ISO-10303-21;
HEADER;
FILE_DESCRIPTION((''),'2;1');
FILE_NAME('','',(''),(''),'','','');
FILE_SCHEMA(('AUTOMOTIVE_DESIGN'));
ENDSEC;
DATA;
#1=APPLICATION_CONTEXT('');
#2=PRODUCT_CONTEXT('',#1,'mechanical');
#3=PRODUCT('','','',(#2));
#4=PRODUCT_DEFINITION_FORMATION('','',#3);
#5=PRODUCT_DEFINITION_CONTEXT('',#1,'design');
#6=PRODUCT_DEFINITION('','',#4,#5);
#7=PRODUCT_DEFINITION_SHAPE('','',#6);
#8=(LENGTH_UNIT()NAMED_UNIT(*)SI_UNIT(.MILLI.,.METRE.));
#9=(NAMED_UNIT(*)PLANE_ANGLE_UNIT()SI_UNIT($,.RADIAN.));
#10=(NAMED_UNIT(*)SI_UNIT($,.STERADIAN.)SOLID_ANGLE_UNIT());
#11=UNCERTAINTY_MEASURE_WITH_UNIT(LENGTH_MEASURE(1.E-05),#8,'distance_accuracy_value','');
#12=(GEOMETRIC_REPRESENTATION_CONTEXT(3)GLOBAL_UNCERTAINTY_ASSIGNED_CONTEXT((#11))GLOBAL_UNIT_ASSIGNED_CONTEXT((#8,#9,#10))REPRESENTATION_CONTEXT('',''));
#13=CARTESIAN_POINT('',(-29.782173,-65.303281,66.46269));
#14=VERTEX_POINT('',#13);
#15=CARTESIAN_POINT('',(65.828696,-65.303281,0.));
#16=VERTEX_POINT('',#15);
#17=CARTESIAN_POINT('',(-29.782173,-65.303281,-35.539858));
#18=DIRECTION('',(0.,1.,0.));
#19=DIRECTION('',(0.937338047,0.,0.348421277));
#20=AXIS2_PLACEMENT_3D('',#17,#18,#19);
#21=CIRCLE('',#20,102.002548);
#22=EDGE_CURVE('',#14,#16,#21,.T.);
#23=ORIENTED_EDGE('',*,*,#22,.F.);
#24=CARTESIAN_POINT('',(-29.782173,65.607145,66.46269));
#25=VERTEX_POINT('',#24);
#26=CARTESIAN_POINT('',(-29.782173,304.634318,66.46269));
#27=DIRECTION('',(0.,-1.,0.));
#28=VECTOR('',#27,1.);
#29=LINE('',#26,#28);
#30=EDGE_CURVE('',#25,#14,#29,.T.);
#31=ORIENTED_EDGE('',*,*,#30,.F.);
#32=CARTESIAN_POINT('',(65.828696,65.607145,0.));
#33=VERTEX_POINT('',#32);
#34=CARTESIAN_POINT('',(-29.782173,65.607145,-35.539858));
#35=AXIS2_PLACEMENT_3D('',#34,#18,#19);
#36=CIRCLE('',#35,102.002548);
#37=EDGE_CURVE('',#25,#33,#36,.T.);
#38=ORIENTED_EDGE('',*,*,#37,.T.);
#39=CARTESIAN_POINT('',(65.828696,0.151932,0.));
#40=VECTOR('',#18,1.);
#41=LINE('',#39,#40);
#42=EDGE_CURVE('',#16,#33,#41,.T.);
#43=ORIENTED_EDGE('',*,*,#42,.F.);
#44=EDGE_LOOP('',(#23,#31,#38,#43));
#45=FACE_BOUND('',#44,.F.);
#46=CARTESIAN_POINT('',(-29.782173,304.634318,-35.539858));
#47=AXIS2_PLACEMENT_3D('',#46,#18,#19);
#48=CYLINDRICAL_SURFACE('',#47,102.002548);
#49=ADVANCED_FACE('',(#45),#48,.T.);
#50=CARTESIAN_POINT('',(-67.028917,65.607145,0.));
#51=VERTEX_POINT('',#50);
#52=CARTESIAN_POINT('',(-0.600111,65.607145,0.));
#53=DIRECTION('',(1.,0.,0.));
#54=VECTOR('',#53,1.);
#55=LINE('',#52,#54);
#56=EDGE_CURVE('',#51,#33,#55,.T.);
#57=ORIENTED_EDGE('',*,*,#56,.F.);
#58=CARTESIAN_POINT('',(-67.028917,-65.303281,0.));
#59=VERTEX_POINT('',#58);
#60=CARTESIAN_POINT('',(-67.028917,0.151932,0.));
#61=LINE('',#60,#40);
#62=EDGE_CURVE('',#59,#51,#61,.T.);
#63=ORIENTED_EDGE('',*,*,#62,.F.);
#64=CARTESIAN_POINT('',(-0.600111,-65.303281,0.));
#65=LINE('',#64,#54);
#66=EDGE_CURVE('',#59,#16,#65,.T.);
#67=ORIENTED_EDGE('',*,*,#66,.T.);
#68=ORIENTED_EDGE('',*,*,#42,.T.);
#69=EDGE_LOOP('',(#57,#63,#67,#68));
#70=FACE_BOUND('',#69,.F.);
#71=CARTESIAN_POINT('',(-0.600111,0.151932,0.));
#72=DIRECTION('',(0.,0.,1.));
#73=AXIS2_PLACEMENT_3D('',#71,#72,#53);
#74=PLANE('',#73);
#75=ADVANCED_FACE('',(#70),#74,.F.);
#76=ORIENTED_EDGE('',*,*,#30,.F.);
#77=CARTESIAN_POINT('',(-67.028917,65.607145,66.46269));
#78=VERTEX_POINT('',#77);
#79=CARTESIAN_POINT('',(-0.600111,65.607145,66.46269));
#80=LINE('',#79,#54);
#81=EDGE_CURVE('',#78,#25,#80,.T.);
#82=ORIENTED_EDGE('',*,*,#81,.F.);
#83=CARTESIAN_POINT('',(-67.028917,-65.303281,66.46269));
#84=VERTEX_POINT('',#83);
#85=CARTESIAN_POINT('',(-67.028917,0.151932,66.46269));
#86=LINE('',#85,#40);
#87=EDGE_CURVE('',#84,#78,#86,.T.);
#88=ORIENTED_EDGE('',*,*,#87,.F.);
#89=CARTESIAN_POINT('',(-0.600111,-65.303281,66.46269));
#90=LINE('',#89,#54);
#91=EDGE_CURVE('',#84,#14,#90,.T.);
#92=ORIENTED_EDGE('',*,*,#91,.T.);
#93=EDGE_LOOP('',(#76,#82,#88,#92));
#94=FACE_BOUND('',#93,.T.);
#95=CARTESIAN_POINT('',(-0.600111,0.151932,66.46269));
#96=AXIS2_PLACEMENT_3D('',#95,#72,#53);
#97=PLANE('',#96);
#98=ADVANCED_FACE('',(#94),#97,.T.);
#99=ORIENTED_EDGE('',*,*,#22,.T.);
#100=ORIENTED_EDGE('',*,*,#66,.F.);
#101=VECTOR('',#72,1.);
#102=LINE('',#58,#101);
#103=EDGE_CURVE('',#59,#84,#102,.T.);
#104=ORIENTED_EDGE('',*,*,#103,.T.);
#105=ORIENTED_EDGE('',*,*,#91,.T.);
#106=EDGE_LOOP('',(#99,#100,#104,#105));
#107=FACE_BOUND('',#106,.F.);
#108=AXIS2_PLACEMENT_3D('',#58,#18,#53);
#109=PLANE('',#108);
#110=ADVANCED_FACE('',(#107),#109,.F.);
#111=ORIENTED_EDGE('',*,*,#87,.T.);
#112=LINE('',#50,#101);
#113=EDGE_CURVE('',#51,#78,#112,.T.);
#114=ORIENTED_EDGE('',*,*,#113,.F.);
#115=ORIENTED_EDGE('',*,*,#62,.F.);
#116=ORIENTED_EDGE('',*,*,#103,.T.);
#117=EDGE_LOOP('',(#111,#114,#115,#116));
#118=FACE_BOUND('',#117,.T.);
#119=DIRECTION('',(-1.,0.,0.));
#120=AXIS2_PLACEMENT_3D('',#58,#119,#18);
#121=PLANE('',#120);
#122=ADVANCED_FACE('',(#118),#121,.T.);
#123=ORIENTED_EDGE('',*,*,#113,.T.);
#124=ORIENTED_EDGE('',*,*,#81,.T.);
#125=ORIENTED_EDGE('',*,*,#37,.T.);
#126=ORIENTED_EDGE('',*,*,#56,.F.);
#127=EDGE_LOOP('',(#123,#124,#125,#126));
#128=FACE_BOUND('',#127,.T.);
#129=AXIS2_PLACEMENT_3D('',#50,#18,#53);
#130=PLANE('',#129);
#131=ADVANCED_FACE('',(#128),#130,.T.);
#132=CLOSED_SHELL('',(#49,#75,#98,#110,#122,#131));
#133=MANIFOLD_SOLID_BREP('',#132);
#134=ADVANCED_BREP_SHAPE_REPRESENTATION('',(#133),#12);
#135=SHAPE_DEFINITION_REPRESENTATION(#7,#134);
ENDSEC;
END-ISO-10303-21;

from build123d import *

# Parameters (mm, degrees)
F0_W        = 132.8576132655
F0_H        = 130.9104263783
F1_DEPTH    = 66.4626900107
F2_T1_DEPTH = 608.9647723724


# Not quite as in the source:
# - a fillet or chamfer that OpenCascade refuses, or shapes differently, is made with other operations: its cross-section is extruded or revolved along the edge and cut away or added


with BuildPart() as f1:
    # F0 (on Top) → F1 (new body)
    with BuildSketch(Plane.XY):
        with Locations((-0.6001107395, 0.1519322395)):
            Rectangle(F0_W, F0_H)
    extrude(amount=F1_DEPTH)

    # F2: fillet of radius 102.0025481231 on 1 edges, made by hand

    # F2_s2 → F2_t1 (cut)
    with BuildSketch(Plane.XZ.offset(-304.6343184257)):
        with BuildLine():
            ThreePointArc((65.8286958933, 0), (28.4388011633, 48.2147713447), (-29.7821733055, 66.4626900107))
            Line((-29.7821733055, 66.4626900107), (65.8286958933, 66.4626900107))
            Line((65.8286958933, 66.4626900107), (65.8286958933, 0))
        make_face()
    extrude(amount=F2_T1_DEPTH, mode=Mode.SUBTRACT)


solid = f1.part
